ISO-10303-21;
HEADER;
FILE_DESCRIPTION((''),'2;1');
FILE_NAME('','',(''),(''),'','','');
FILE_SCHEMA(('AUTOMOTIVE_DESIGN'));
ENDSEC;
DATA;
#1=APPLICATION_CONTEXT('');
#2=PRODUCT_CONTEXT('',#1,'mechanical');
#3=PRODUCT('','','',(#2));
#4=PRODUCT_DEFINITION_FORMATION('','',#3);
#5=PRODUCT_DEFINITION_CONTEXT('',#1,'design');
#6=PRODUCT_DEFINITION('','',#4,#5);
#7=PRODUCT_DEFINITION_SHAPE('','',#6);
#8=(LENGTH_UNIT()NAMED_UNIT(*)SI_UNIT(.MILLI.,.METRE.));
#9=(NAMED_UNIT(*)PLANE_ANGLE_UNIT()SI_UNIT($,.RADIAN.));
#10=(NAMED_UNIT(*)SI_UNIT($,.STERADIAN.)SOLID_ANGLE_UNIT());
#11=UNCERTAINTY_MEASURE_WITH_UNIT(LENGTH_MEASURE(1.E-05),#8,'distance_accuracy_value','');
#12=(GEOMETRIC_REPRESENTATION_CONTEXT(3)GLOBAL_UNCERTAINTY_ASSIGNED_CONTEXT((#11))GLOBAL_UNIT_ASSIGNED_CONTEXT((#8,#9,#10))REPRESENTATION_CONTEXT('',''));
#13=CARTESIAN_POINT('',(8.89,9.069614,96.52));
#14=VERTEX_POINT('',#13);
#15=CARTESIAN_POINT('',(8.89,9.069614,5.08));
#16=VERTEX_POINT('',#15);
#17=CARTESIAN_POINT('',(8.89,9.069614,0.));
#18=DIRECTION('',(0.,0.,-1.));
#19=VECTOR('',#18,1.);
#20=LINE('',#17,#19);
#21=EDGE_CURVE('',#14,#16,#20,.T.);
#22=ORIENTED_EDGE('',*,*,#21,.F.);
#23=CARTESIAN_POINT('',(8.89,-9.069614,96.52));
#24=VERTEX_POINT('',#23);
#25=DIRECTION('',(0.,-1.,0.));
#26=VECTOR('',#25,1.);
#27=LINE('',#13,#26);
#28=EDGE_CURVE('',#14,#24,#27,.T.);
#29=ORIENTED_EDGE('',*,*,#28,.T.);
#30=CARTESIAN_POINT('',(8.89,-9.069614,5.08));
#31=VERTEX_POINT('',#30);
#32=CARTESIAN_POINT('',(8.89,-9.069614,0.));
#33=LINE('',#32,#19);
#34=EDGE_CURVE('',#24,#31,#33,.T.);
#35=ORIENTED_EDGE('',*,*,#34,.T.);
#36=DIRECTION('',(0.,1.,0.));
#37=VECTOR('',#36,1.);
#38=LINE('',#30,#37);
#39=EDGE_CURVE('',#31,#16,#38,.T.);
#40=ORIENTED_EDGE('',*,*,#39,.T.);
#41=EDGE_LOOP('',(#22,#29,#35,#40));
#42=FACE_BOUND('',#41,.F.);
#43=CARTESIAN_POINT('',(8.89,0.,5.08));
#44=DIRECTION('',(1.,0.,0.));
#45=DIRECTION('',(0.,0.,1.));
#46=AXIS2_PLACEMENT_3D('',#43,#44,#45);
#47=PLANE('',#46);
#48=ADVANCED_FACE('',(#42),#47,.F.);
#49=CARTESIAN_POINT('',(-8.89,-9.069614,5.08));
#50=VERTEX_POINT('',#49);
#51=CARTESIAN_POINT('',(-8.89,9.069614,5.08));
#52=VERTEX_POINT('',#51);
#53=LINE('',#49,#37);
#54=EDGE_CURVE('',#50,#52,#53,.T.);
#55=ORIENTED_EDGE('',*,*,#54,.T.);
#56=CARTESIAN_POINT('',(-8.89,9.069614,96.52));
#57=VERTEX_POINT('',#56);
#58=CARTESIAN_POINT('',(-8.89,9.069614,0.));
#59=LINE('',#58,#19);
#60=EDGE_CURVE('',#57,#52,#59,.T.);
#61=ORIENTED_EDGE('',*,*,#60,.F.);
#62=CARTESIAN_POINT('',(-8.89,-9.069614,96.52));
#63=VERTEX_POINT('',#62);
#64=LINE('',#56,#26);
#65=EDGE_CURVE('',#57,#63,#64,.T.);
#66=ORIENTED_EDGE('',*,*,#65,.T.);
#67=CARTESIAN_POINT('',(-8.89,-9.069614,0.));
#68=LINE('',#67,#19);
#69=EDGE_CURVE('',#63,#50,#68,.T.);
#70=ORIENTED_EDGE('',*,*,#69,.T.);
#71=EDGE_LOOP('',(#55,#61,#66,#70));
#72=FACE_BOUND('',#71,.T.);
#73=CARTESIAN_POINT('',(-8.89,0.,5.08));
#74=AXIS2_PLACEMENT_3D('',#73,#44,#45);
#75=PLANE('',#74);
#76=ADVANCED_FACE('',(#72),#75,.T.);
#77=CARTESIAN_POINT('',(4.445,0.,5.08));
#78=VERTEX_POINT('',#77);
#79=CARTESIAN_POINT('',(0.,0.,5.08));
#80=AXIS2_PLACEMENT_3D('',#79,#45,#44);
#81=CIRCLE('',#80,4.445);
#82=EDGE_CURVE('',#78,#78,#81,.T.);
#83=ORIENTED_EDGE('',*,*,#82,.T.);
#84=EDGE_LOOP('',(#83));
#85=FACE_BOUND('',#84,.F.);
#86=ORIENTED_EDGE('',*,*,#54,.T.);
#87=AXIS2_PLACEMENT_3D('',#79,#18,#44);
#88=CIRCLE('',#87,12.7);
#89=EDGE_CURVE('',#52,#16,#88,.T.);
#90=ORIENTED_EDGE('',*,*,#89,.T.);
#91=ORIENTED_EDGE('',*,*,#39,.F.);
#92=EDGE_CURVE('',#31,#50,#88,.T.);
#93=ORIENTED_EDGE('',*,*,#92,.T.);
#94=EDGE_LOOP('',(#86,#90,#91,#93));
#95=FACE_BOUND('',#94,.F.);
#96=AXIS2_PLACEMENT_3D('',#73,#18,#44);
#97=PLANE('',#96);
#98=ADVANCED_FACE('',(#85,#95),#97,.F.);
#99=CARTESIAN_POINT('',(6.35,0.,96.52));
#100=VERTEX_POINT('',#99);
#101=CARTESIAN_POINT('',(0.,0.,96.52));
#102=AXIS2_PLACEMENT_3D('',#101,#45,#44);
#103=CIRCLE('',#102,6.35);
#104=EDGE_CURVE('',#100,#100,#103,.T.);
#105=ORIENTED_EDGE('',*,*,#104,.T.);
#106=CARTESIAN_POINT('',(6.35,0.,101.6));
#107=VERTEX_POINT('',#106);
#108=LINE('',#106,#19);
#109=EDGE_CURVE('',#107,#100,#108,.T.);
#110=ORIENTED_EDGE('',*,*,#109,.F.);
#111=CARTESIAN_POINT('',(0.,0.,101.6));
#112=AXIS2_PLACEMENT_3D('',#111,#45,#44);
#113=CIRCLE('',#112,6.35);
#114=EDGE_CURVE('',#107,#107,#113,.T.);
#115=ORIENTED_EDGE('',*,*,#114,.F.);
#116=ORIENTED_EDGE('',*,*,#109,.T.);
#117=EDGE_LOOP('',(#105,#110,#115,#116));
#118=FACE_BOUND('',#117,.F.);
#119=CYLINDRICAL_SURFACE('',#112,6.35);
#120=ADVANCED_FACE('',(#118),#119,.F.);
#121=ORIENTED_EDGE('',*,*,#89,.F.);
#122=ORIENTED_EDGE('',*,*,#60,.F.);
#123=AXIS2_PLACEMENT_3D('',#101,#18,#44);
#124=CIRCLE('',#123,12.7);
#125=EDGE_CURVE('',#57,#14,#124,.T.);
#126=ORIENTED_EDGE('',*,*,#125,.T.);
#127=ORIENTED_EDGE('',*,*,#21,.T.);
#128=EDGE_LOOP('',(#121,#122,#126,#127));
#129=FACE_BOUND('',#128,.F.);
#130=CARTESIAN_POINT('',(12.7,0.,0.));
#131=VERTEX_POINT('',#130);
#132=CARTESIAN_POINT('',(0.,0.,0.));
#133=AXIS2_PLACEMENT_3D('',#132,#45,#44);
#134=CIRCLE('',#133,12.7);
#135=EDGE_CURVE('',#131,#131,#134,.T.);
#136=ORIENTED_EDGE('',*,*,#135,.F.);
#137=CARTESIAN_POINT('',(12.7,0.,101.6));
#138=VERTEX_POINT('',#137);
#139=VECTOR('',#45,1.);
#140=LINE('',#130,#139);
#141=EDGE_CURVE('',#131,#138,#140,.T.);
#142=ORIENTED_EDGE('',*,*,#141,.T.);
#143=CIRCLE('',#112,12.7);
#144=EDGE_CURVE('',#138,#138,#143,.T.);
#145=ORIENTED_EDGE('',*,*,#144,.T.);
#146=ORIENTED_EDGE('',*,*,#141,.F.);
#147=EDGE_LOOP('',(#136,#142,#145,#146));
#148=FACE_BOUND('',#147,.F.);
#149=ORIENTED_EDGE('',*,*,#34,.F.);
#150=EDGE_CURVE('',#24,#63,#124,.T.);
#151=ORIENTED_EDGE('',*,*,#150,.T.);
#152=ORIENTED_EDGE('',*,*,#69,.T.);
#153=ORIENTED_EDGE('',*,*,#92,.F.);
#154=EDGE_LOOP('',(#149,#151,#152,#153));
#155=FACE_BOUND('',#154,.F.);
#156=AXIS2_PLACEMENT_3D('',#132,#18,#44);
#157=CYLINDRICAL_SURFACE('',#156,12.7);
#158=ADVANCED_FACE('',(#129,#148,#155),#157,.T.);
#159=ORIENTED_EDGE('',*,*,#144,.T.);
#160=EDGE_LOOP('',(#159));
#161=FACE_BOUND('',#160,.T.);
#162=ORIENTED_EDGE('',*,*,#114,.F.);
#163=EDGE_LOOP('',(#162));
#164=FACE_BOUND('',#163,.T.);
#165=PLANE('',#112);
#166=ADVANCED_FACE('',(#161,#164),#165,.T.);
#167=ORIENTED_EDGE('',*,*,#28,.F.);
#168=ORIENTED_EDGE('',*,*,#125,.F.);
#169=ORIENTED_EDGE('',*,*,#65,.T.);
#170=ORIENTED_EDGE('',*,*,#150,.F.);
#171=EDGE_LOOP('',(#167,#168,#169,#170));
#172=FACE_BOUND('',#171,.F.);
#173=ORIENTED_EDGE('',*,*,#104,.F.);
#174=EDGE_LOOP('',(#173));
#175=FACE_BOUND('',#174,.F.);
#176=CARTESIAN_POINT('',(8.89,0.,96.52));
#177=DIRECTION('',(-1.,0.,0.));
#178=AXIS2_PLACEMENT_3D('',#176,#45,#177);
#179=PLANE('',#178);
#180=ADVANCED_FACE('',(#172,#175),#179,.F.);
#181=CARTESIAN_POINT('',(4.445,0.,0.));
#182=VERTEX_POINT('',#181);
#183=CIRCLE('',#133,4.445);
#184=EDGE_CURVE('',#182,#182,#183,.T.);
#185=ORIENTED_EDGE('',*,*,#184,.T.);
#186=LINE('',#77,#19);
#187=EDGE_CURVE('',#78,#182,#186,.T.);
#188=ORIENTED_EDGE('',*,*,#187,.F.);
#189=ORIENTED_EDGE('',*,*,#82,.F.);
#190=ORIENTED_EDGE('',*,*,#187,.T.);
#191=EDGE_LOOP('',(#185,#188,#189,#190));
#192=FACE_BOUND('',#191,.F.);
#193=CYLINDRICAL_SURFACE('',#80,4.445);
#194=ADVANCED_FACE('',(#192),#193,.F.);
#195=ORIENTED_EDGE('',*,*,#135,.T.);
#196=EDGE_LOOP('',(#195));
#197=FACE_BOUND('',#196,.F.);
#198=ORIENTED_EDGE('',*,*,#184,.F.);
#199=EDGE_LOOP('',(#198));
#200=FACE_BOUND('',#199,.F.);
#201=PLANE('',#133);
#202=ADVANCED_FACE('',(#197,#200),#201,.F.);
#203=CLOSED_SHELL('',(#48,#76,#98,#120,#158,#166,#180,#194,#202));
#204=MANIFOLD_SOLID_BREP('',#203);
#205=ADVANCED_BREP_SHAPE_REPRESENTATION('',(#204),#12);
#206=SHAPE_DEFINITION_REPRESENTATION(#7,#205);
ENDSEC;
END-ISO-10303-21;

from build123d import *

# Parameters (mm, degrees)
F0_R          = 12.7
F1_DEPTH      = 101.6
F2_T          = -9.525
F3_W          = 8.89
F3_H          = 91.44
F4_DEPTH      = 12.701
F4_DEPTH_BACK = 25.4
F5_R          = 6.35
F6_DEPTH      = 25.4
F7_R          = 4.445
F8_DEPTH      = 25.4


# Not quite as in the source:
# - a length typed as a fraction of an inch, garbled in the dataset ("3 / 203.2 mm" for 3/8 in), is restored


with BuildPart() as f1:
    # F0 (on Top) → F1 (new body)
    with BuildSketch(Plane.XY):
        Circle(F0_R)
    extrude(amount=F1_DEPTH)

    # F2 (hollow: no face is removed)
    offset(amount=F2_T, mode=Mode.SUBTRACT)

    # F3 (on Front) → F4 (cut, two sides)
    with BuildSketch(Plane.XZ) as f4_sk:
        with Locations((-4.445, 50.8)):
            Rectangle(F3_W, F3_H)
        with Locations((4.445, 50.8)):
            Rectangle(F3_W, F3_H)
    extrude(amount=-F4_DEPTH, mode=Mode.SUBTRACT)
    extrude(f4_sk.sketch, amount=F4_DEPTH_BACK, mode=Mode.SUBTRACT)

    # F5 (on face) → F6 (cut)
    with BuildSketch(Plane.XY.offset(101.6)):
        Circle(F5_R)
    extrude(amount=-F6_DEPTH, mode=Mode.SUBTRACT)

    # F7 (on face) → F8 (cut)
    with BuildSketch(Plane.XY.offset(5.08)):
        Circle(F7_R)
    extrude(amount=-F8_DEPTH, mode=Mode.SUBTRACT)


solid = f1.part
